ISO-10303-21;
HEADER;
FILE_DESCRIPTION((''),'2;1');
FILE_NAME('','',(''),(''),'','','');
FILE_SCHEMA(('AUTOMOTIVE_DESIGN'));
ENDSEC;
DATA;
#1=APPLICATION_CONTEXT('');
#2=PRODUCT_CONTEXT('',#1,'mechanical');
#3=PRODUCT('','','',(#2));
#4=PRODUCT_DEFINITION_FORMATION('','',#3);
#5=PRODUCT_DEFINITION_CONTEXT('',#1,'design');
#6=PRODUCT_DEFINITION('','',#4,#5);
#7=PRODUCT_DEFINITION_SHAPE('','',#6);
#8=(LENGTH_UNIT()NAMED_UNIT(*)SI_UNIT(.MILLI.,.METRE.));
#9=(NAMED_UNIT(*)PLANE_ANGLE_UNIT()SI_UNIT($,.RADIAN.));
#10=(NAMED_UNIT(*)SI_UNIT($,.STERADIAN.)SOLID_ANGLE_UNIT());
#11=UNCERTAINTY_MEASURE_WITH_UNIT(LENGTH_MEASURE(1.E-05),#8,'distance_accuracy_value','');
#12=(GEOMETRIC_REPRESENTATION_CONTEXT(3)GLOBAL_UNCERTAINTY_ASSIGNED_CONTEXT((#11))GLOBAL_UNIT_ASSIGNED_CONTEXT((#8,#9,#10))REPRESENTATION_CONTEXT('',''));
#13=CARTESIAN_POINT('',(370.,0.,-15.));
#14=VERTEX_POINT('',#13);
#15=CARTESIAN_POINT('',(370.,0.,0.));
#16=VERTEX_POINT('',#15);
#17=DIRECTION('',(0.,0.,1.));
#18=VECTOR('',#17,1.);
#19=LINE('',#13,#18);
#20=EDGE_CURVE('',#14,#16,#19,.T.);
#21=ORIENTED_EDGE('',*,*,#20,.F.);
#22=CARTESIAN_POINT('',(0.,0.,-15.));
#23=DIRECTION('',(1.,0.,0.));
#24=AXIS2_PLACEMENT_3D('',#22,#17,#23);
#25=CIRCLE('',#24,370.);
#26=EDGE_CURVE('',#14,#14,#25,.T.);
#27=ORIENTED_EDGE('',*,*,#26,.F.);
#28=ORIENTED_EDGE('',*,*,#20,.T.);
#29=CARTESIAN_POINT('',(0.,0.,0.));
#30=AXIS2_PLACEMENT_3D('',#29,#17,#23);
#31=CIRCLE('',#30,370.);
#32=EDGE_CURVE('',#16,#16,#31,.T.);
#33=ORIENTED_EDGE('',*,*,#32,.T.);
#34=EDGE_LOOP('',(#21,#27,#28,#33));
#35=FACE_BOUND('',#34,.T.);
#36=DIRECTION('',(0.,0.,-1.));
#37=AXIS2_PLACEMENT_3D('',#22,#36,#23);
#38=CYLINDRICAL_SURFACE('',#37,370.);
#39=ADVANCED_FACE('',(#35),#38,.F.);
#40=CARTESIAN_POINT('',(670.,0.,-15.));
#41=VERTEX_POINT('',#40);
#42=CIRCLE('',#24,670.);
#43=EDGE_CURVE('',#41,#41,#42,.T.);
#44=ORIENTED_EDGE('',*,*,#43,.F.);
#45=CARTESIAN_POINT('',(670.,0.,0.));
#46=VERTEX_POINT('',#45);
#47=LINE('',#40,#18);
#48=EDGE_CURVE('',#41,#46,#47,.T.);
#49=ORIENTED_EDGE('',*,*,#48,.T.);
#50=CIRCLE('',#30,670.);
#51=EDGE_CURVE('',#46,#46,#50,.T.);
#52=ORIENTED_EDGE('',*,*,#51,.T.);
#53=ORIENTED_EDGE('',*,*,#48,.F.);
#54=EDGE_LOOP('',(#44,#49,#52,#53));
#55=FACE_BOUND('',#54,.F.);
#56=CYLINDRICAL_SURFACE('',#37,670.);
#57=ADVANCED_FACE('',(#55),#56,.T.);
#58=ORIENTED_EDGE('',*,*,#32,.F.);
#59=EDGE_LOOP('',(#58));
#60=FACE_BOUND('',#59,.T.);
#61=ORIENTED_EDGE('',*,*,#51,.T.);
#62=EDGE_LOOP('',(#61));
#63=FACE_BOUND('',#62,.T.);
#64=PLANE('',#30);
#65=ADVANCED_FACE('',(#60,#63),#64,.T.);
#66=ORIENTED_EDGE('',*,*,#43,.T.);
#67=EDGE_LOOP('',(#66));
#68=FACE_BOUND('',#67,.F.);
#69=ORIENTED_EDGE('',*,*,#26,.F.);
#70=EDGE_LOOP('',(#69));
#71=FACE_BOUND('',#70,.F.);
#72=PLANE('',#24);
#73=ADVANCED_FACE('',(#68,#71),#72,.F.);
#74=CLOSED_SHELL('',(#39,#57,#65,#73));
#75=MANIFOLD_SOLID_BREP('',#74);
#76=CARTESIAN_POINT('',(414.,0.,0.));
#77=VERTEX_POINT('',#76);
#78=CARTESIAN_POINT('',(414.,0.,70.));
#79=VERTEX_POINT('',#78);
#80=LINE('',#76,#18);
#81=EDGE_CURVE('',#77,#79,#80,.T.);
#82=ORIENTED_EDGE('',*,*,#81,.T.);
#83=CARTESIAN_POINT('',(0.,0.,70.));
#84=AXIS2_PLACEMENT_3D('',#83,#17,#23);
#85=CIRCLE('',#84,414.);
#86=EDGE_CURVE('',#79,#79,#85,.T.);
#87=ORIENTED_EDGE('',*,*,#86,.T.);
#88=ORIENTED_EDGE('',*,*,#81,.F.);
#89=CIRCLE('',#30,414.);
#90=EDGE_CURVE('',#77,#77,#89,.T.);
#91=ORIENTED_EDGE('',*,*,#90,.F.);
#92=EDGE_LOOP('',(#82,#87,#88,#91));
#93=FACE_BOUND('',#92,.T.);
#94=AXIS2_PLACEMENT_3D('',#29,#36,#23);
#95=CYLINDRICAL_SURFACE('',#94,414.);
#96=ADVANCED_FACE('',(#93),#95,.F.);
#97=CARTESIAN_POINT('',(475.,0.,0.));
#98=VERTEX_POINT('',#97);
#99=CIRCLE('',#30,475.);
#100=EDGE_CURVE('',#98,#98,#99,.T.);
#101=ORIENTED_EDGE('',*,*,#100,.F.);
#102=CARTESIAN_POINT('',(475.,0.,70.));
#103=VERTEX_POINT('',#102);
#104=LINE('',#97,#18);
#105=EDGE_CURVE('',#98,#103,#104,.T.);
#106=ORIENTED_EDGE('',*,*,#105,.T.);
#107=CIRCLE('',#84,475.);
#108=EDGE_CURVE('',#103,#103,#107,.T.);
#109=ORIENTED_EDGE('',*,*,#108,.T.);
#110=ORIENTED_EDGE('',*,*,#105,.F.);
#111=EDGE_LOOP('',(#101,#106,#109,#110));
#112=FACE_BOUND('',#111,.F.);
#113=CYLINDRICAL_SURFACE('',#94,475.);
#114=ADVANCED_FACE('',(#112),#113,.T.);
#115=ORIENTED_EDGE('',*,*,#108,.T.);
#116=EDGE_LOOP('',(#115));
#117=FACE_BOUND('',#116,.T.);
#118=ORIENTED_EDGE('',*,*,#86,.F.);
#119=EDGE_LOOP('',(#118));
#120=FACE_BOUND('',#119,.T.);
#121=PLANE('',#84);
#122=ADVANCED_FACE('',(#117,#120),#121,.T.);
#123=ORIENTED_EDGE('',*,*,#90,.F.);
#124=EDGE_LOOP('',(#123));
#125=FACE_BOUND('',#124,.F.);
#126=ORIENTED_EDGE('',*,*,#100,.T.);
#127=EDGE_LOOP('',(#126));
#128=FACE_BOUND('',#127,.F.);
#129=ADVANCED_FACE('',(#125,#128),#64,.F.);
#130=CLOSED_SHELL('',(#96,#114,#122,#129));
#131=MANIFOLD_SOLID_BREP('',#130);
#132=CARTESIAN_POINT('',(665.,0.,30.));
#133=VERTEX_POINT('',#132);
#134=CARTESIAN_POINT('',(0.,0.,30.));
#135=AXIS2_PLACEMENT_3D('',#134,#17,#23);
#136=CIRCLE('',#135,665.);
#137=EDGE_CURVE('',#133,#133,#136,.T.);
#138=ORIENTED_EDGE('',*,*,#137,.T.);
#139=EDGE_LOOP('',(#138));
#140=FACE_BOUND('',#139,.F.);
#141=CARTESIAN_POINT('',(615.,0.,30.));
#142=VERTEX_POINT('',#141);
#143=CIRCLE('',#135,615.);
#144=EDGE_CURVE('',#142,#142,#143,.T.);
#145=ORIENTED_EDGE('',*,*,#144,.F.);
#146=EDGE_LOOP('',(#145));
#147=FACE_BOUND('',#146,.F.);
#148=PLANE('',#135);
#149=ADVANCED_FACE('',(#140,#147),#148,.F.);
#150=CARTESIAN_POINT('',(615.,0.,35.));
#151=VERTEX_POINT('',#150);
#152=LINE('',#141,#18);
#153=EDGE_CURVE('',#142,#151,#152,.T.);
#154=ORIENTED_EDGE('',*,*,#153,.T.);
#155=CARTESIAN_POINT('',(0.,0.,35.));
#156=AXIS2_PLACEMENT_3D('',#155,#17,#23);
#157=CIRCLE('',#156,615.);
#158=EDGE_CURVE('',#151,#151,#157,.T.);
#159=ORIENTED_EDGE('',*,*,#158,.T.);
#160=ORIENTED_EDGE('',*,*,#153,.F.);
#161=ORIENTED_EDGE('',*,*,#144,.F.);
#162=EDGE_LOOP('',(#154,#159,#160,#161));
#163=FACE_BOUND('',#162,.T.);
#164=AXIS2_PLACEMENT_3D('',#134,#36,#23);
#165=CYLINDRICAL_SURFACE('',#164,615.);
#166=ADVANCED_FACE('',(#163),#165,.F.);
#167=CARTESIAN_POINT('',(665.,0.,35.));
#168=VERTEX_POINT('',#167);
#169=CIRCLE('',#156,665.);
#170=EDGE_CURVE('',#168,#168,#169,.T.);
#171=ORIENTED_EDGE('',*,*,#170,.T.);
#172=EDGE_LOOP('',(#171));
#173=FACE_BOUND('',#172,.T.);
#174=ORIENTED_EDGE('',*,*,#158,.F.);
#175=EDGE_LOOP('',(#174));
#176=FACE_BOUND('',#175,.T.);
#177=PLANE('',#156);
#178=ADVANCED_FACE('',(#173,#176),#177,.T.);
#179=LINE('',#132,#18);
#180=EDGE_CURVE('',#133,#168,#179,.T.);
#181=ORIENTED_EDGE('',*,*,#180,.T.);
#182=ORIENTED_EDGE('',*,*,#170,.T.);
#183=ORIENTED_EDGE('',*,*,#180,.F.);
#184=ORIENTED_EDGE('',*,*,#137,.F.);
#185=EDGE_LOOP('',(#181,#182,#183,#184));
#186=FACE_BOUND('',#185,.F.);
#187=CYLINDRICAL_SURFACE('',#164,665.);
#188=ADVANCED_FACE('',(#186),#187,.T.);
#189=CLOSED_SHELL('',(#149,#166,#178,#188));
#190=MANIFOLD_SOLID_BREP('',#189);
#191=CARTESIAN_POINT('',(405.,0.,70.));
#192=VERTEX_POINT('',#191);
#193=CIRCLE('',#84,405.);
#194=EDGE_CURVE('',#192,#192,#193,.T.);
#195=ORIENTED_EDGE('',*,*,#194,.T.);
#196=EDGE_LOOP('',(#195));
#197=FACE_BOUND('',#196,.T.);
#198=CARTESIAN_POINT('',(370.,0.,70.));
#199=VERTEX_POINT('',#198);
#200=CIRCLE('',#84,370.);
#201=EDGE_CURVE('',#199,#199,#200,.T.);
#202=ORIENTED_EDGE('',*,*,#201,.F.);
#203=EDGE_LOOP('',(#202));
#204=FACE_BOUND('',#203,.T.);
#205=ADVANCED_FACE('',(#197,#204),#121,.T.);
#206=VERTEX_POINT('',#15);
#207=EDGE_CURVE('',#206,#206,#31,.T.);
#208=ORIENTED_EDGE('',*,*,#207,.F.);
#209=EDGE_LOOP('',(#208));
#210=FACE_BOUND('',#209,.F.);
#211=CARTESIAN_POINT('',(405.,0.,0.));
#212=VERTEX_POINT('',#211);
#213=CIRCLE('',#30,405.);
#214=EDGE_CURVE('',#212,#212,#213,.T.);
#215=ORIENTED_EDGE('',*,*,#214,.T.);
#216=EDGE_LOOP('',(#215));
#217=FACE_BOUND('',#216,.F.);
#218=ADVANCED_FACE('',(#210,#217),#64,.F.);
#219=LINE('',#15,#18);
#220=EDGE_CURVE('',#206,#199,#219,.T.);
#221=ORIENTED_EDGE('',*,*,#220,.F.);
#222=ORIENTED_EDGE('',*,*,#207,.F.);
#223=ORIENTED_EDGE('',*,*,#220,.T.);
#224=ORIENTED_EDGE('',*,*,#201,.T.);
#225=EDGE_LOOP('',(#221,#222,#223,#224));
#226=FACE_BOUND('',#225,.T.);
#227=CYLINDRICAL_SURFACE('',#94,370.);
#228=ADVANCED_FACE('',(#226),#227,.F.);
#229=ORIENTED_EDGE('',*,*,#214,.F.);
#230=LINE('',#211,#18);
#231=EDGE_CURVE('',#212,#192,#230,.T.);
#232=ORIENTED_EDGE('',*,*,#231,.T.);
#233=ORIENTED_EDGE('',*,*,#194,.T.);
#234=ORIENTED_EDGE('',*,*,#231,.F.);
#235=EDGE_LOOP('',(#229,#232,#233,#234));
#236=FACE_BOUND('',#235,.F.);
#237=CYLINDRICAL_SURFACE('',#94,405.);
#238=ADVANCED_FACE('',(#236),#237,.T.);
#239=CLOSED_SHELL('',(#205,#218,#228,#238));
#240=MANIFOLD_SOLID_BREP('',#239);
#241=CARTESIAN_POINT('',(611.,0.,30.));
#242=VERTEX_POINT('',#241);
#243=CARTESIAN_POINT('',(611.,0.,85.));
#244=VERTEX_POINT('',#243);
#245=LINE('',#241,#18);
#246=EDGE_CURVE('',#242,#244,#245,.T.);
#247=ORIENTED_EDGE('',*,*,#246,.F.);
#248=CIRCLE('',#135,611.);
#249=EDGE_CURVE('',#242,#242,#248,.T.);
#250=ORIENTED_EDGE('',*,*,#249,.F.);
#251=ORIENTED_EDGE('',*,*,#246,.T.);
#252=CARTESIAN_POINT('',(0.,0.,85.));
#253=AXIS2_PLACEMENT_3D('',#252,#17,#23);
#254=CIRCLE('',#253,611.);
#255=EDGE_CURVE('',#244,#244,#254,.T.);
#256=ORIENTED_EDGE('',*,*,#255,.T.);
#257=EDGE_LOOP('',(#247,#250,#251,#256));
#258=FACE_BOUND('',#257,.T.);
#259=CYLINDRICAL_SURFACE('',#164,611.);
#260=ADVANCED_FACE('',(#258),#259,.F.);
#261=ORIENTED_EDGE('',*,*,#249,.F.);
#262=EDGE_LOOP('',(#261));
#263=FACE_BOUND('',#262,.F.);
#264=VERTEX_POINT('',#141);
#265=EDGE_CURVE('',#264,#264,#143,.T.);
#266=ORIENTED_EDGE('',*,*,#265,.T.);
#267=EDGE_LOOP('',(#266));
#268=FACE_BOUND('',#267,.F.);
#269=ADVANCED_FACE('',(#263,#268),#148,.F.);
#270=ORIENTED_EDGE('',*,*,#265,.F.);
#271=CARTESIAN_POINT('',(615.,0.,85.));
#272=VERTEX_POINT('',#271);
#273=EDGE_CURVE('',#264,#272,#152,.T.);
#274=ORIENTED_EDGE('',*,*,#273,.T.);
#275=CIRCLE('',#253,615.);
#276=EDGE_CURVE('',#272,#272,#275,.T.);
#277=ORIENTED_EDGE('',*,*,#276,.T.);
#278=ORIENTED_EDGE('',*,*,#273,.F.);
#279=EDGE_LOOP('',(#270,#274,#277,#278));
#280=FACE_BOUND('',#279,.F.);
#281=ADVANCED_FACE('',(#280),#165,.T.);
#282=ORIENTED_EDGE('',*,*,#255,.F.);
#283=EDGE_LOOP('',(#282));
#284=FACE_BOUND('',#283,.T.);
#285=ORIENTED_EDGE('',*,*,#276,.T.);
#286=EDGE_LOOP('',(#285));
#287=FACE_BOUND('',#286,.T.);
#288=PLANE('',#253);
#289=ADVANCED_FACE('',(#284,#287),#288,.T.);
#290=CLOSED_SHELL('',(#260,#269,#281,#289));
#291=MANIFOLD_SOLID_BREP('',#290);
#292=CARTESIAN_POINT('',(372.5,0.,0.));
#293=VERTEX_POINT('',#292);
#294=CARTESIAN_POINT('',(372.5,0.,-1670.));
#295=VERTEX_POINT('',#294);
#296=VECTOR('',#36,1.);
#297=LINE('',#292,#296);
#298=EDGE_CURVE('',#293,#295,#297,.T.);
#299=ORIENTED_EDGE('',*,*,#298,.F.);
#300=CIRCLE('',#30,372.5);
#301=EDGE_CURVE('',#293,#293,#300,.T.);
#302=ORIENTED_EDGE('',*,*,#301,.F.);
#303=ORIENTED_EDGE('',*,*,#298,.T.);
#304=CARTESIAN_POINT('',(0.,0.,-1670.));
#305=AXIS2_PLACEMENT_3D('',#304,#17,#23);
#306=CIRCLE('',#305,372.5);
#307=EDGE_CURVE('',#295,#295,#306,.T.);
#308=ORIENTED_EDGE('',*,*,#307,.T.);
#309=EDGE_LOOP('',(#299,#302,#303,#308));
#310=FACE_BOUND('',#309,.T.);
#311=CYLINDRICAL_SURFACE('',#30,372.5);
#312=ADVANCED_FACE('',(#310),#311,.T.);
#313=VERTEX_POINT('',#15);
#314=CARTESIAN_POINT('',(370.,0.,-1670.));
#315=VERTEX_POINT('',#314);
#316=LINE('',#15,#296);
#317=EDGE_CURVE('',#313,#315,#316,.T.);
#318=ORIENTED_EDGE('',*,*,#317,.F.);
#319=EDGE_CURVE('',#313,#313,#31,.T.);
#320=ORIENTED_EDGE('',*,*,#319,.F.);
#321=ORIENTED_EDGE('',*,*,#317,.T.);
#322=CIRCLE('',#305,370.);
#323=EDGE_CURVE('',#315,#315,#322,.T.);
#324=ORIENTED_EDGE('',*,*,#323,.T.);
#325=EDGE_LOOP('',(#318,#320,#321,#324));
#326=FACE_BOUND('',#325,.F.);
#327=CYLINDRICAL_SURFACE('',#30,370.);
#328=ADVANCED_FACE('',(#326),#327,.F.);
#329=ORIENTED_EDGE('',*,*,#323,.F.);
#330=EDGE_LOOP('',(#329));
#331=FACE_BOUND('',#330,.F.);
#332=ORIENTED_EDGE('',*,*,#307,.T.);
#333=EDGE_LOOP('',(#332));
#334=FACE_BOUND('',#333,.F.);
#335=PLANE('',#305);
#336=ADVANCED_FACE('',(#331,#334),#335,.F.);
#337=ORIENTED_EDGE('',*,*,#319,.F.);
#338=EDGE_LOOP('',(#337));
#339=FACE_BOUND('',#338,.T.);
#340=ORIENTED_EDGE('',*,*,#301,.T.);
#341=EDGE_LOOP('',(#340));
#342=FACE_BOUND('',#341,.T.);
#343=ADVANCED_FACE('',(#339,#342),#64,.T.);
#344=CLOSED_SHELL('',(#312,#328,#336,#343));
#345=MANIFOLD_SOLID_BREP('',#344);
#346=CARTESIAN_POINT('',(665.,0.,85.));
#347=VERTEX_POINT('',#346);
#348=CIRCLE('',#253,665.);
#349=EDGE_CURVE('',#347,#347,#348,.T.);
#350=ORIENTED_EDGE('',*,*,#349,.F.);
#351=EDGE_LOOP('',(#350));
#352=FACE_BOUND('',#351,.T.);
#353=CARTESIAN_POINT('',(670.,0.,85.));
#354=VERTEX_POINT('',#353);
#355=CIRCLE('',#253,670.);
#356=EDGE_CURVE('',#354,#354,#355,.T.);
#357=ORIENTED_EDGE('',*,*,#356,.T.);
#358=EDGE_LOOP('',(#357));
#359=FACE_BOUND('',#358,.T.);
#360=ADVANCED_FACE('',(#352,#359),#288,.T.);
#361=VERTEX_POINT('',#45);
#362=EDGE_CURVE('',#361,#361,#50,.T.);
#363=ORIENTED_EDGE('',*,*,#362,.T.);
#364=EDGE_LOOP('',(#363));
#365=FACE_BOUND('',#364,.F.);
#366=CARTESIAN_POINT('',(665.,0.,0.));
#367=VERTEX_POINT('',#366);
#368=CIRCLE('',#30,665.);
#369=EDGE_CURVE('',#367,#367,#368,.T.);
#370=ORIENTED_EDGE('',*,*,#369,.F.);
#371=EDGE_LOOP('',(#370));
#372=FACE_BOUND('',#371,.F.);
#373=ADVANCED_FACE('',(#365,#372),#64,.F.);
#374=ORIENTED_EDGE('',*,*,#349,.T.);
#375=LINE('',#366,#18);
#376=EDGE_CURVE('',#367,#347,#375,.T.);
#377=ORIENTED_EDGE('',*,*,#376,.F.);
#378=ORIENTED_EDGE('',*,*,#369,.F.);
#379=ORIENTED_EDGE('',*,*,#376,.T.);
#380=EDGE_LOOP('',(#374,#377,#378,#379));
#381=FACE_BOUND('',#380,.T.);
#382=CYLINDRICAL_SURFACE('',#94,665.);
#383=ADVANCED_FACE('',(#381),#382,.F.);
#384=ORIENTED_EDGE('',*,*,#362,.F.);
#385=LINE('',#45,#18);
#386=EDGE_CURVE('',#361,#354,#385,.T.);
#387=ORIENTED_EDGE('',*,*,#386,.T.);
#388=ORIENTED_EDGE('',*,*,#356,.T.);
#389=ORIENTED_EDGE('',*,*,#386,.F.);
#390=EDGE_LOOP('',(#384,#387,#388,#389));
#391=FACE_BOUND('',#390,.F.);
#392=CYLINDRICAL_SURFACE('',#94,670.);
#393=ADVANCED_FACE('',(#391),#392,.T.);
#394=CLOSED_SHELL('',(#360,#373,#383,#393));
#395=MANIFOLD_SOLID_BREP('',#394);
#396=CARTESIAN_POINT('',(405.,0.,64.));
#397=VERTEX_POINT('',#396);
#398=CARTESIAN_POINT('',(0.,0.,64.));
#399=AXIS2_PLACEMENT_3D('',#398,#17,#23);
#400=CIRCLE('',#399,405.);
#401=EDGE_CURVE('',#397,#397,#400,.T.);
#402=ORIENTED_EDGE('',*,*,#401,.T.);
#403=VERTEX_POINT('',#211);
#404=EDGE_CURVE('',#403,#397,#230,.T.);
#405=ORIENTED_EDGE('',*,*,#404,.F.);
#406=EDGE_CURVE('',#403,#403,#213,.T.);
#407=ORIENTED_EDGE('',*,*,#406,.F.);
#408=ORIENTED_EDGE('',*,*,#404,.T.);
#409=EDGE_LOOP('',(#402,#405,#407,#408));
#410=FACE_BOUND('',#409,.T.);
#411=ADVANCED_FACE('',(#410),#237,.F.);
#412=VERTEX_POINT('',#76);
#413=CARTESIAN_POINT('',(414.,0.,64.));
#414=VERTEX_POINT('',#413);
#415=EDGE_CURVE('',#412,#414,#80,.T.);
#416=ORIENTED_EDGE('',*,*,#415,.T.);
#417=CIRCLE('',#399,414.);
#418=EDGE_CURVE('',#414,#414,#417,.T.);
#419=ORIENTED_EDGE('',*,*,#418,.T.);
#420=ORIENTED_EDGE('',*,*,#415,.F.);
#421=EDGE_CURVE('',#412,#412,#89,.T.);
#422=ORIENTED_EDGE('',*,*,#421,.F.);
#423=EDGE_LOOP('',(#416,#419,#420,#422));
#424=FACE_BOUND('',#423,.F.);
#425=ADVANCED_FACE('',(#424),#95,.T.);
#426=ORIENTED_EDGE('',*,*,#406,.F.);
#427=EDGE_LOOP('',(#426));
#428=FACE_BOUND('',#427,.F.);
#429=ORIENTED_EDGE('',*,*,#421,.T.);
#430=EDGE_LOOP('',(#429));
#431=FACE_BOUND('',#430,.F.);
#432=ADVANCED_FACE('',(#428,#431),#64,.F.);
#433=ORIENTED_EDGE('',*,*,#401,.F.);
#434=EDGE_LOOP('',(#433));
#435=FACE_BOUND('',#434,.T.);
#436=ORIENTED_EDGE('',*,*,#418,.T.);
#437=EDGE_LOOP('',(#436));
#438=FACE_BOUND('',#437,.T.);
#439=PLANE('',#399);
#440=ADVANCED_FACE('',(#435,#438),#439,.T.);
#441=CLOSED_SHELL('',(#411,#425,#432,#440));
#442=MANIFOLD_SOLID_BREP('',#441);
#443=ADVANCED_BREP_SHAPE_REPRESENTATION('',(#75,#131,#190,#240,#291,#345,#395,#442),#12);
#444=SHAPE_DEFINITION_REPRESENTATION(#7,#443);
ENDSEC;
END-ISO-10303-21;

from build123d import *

# Parameters (mm, degrees)
F1_R      = 405
F1_R_2    = 370
F2_DEPTH  = 70
F3_R      = 414
F3_R_2    = 405
F4_DEPTH  = 64
F5_R      = 475
F5_R_2    = 414
F6_DEPTH  = 70
F7_R      = 670
F7_R_2    = 665
F8_DEPTH  = 85
F10_R     = 615
F10_R_2   = 611
F11_DEPTH = 55
F12_R     = 665
F12_R_2   = 615
F13_DEPTH = 5
F0_R      = 372.5
F0_R_2    = 370
F14_DEPTH = 1670
F16_R     = 670
F16_R_2   = 370
F17_DEPTH = 15


with BuildPart() as f2:
    # F1 (on face) → F2 (new body)
    with BuildSketch(Plane.XY):
        Circle(F1_R)
        Circle(F1_R_2, mode=Mode.SUBTRACT)
    extrude(amount=F2_DEPTH)


with BuildPart() as f4:
    # F3 (on face) → F4 (new body)
    with BuildSketch(Plane.XY):
        Circle(F3_R)
        Circle(F3_R_2, mode=Mode.SUBTRACT)
    extrude(amount=F4_DEPTH)


with BuildPart() as f6:
    # F5 (on face) → F6 (new body)
    with BuildSketch(Plane.XY):
        Circle(F5_R)
        Circle(F5_R_2, mode=Mode.SUBTRACT)
    extrude(amount=F6_DEPTH)


with BuildPart() as f8:
    # F7 (on face) → F8 (new body)
    with BuildSketch(Plane.XY):
        Circle(F7_R)
        Circle(F7_R_2, mode=Mode.SUBTRACT)
    extrude(amount=F8_DEPTH)


with BuildPart() as f11:
    # F10 (on offset) → F11 (new body)
    with BuildSketch(Plane.XY.offset(30)):
        Circle(F10_R)
        Circle(F10_R_2, mode=Mode.SUBTRACT)
    extrude(amount=F11_DEPTH)


with BuildPart() as f13:
    # F12 (on offset) → F13 (new body)
    with BuildSketch(Plane.XY.offset(30)):
        Circle(F12_R)
        Circle(F12_R_2, mode=Mode.SUBTRACT)
    extrude(amount=F13_DEPTH)


with BuildPart() as f14:
    # F0 (on Top) → F14 (new body)
    with BuildSketch(Plane.XY):
        Circle(F0_R)
        Circle(F0_R_2, mode=Mode.SUBTRACT)
    extrude(amount=-F14_DEPTH)


with BuildPart() as f17:
    # F16 (on offset) → F17 (new body)
    with BuildSketch(Plane.XY.offset(-15)):
        Circle(F16_R)
        Circle(F16_R_2, mode=Mode.SUBTRACT)
    extrude(amount=F17_DEPTH)


solid = Compound([f2.part, f4.part, f6.part, f8.part, f11.part, f13.part, f14.part, f17.part])
